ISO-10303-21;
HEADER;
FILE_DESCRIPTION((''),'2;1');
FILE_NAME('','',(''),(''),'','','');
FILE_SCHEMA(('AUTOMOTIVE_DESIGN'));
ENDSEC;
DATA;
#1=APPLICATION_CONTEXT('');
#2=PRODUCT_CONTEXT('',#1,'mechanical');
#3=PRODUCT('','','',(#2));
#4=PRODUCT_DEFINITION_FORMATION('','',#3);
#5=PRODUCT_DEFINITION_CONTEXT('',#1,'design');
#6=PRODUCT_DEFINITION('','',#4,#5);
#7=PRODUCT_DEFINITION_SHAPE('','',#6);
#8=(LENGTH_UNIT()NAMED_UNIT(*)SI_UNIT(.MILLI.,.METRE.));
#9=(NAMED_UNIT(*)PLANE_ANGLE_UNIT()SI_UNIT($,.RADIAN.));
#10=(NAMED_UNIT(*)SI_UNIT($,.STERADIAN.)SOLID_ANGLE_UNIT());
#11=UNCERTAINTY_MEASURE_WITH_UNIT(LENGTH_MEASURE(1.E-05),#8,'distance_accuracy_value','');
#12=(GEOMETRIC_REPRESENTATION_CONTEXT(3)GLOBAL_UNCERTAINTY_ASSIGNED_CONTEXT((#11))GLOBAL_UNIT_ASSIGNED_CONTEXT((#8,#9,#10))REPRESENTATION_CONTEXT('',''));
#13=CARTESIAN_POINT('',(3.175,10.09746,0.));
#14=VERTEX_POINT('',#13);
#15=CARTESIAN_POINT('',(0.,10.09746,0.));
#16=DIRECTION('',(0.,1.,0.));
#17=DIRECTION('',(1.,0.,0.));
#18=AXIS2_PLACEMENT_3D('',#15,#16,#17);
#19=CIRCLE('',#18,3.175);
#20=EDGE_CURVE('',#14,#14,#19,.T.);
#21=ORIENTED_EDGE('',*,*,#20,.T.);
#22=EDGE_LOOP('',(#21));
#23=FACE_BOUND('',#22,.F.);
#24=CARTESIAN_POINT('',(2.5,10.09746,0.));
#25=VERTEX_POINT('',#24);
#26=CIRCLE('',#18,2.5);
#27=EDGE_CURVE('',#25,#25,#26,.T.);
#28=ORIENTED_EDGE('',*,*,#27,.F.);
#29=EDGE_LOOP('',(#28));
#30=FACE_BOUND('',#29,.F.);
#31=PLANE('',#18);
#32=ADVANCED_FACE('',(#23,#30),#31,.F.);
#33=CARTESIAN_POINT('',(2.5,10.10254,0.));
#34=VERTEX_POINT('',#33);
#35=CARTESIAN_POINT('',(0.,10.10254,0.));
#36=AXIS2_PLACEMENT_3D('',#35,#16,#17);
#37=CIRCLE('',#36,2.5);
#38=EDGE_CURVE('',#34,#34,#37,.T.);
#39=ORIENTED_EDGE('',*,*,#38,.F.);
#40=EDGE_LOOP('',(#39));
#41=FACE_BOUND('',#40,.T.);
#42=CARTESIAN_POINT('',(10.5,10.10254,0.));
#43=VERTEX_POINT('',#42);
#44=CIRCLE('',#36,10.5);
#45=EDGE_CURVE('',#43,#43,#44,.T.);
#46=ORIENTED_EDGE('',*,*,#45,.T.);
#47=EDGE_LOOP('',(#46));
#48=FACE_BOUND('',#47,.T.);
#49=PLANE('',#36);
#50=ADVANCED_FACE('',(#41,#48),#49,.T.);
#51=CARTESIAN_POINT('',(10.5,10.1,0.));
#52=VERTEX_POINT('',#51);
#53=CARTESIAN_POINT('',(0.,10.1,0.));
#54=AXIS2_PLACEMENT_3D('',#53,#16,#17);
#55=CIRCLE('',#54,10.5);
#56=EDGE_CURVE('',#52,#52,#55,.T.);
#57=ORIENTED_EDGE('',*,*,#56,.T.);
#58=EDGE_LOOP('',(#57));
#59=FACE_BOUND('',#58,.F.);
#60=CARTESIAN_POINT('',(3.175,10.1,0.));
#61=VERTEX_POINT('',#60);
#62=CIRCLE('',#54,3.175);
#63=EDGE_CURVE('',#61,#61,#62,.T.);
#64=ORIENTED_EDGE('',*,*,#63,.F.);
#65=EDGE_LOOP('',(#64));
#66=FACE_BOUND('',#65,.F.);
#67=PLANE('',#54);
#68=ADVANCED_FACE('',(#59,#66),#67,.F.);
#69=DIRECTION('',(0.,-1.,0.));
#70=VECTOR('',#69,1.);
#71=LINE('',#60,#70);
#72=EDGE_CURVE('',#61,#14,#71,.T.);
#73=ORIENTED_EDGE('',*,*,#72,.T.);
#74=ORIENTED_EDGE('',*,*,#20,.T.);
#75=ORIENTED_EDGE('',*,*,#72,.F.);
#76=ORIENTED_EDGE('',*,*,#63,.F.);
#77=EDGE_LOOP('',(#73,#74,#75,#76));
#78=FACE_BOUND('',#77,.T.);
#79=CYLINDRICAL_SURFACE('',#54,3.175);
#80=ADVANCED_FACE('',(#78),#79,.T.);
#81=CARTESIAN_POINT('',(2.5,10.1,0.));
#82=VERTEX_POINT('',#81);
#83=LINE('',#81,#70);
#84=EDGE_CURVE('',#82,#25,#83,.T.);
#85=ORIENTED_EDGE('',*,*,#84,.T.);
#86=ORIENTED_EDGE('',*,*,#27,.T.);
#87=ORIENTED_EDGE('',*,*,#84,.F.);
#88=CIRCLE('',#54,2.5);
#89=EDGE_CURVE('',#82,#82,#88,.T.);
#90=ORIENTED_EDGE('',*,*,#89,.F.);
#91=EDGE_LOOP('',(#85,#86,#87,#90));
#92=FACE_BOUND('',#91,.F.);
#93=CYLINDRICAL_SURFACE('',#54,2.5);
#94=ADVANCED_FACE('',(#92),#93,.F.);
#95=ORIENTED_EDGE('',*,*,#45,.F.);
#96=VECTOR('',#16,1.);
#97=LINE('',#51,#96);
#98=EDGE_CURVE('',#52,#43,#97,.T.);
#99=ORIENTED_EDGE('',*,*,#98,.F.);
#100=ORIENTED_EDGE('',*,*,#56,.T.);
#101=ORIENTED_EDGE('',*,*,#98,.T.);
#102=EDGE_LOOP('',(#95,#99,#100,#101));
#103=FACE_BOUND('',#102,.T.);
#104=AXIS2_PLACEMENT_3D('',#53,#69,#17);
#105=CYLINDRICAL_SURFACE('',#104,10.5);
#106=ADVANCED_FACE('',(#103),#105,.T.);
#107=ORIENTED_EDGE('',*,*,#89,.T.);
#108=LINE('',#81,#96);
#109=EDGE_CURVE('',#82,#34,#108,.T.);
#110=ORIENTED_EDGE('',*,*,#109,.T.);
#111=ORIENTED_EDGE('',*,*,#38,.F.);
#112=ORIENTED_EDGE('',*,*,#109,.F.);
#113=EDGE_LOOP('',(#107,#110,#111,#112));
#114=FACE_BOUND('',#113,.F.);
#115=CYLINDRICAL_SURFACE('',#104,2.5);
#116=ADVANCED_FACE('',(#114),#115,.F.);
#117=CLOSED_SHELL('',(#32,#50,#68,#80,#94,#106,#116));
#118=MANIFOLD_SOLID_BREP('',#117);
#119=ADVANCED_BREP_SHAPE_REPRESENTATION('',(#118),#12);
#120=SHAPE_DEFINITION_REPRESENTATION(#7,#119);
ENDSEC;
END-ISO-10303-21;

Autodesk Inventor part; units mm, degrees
ref_plane "YZ Plane" through (0, 0, 0) normal (1, 0, 0) x (0, 1, 0)
ref_plane "XZ Plane" through (0, 0, 0) normal (0, 1, 0) x (-1, 0, 0)
ref_plane "XY Plane" through (0, 0, 0) normal (0, 0, 1) x (1, 0, 0)
sketch "Sketch1" plane through (0, 10.1, 0) normal (0, 1, 0) x (1, 0, 0)
  circle A0 centre (0, 0) radius 2.5 projected
  circle A1 centre (0, 0) radius 10.5 projected
  circle A2 centre (0, 0) radius 3.175
  dimension "d1" = 6.35
extrude "Extrusion1" add sketch "Sketch1" against normal blind 0.00254 contours A2
sketch "Sketch2" plane through (0, 10.1, 0) normal (0, 1, 0) x (1, 0, 0)
  circle A0 centre (0, 0) radius 2.5 projected
  circle A1 centre (0, 0) radius 10.5 projected
extrude "Extrusion2" add sketch "Sketch2" along normal blind 0.00254
properties part number "MSK01-06A"
